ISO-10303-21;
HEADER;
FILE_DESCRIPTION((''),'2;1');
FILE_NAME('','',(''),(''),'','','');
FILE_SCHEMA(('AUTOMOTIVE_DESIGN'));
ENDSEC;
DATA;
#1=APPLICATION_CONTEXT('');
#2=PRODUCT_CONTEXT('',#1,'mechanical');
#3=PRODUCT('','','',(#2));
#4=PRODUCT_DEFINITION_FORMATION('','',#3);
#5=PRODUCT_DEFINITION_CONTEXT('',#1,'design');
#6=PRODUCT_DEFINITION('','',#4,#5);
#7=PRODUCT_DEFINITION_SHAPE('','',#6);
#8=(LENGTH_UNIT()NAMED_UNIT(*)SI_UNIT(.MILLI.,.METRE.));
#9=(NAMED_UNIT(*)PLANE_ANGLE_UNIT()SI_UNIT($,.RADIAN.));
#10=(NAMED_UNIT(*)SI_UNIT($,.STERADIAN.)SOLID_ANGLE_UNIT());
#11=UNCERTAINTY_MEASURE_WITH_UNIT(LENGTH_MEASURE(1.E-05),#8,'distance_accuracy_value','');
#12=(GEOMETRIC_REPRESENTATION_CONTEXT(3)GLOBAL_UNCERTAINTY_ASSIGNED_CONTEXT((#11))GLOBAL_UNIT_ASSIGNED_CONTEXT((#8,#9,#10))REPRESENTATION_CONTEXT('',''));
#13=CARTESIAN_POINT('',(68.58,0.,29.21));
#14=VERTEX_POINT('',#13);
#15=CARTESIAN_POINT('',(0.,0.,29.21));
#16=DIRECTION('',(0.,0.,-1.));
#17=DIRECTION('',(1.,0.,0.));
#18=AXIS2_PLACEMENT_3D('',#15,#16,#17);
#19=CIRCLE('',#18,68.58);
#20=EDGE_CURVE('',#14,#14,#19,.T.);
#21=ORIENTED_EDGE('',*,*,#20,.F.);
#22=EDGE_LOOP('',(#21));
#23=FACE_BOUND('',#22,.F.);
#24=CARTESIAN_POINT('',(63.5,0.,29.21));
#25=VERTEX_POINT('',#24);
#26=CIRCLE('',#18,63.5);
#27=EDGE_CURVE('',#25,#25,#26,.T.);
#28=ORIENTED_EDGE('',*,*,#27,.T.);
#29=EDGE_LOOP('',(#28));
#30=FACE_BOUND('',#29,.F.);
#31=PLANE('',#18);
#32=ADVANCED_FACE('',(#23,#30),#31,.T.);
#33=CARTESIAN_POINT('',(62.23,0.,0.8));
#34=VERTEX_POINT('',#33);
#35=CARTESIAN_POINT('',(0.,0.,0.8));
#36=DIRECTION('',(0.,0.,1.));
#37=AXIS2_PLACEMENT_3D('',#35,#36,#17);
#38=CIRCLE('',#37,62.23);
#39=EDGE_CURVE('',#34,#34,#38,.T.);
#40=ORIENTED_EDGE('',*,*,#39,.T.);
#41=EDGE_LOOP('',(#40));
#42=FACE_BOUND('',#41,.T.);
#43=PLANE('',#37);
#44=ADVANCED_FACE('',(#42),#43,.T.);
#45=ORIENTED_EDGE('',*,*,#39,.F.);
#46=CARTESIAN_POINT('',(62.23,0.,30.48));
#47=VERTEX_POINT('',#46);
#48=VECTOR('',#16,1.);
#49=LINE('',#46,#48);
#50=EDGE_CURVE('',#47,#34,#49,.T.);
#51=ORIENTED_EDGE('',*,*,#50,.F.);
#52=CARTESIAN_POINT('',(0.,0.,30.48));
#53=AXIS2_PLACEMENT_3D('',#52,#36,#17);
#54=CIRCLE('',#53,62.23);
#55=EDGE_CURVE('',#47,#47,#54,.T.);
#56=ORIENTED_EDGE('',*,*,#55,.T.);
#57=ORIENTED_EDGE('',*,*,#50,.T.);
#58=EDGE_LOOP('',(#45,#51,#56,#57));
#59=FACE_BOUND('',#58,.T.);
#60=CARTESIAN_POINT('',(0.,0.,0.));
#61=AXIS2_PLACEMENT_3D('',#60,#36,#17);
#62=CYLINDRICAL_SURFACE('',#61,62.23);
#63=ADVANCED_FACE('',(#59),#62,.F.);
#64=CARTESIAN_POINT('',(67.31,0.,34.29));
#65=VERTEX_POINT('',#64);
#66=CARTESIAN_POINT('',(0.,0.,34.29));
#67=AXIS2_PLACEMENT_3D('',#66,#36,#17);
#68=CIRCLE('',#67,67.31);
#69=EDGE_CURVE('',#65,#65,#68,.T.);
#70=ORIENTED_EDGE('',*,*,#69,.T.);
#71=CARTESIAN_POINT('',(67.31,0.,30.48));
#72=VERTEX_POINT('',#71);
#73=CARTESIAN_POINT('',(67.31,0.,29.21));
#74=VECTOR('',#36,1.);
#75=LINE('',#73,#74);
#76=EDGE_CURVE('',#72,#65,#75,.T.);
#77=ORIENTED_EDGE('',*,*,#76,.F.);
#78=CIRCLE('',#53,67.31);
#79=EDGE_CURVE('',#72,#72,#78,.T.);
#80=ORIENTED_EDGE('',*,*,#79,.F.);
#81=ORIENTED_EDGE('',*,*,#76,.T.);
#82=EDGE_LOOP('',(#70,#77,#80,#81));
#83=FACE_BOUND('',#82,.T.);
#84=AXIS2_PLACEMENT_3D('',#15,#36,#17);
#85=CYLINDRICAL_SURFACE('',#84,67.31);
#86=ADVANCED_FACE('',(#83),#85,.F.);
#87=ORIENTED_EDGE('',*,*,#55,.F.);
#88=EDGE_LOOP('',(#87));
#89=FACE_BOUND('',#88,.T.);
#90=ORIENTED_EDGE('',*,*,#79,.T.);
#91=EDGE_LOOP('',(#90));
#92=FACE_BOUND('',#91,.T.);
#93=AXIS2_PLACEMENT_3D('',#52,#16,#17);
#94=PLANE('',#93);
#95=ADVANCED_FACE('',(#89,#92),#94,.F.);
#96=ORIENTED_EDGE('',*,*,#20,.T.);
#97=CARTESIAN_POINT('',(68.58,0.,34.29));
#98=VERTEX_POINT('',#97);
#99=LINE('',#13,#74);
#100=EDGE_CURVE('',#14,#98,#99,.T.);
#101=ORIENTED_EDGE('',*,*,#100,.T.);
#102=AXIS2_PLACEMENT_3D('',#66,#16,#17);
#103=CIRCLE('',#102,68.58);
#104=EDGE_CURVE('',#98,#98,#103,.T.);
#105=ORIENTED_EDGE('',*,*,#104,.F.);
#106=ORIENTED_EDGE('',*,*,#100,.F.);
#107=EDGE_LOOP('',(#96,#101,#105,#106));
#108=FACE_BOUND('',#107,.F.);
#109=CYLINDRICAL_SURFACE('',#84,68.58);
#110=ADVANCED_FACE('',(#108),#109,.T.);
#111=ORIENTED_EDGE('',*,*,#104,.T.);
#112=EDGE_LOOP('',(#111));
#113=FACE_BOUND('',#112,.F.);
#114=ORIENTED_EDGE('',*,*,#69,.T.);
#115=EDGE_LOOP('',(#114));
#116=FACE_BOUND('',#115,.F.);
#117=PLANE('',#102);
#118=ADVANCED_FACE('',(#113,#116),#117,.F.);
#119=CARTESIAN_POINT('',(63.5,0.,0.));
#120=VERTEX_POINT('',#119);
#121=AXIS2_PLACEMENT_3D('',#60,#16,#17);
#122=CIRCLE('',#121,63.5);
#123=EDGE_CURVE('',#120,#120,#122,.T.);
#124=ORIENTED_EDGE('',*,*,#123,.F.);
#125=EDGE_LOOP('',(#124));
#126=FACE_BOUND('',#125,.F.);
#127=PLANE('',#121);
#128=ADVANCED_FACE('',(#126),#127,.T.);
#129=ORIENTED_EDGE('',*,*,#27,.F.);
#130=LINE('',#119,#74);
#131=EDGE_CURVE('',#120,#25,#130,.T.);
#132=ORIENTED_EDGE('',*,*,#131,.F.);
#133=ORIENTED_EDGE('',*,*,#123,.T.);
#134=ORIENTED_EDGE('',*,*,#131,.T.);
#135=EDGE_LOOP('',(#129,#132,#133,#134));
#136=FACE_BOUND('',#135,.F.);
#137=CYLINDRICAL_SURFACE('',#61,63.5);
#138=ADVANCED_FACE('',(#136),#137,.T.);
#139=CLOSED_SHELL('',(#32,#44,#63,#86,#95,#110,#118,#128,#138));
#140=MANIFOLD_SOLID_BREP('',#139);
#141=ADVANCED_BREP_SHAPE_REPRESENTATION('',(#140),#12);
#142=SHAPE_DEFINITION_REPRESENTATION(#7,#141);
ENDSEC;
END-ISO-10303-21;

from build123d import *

# Parameters (mm, degrees)
F2_T     = -1.27
F3_R     = 62.23
F4_DEPTH = 0.47


with BuildPart() as f1:
    # F0 (on Front) → F1 (revolve)
    with BuildSketch(Plane.XZ):
        Polygon((0, 34.29), (0, 0), (63.5, 0), (63.5, 29.21), (68.58, 29.21), (68.58, 34.29), align=None)
    revolve(axis=Axis((0, 0, -14.2717824864), (0, 0, -1)))

    # F2
    f2_openings = [f1.faces().sort_by_distance(p)[0] for p in [
        (0, 0, 34.29),
    ]]
    offset(amount=F2_T, openings=f2_openings, kind=Kind.INTERSECTION)

    # F3 (on face) → F4 (cut, through all)
    with BuildSketch(Plane.XY.offset(1.27)):
        Circle(F3_R)
    extrude(amount=-F4_DEPTH, mode=Mode.SUBTRACT)


solid = f1.part
